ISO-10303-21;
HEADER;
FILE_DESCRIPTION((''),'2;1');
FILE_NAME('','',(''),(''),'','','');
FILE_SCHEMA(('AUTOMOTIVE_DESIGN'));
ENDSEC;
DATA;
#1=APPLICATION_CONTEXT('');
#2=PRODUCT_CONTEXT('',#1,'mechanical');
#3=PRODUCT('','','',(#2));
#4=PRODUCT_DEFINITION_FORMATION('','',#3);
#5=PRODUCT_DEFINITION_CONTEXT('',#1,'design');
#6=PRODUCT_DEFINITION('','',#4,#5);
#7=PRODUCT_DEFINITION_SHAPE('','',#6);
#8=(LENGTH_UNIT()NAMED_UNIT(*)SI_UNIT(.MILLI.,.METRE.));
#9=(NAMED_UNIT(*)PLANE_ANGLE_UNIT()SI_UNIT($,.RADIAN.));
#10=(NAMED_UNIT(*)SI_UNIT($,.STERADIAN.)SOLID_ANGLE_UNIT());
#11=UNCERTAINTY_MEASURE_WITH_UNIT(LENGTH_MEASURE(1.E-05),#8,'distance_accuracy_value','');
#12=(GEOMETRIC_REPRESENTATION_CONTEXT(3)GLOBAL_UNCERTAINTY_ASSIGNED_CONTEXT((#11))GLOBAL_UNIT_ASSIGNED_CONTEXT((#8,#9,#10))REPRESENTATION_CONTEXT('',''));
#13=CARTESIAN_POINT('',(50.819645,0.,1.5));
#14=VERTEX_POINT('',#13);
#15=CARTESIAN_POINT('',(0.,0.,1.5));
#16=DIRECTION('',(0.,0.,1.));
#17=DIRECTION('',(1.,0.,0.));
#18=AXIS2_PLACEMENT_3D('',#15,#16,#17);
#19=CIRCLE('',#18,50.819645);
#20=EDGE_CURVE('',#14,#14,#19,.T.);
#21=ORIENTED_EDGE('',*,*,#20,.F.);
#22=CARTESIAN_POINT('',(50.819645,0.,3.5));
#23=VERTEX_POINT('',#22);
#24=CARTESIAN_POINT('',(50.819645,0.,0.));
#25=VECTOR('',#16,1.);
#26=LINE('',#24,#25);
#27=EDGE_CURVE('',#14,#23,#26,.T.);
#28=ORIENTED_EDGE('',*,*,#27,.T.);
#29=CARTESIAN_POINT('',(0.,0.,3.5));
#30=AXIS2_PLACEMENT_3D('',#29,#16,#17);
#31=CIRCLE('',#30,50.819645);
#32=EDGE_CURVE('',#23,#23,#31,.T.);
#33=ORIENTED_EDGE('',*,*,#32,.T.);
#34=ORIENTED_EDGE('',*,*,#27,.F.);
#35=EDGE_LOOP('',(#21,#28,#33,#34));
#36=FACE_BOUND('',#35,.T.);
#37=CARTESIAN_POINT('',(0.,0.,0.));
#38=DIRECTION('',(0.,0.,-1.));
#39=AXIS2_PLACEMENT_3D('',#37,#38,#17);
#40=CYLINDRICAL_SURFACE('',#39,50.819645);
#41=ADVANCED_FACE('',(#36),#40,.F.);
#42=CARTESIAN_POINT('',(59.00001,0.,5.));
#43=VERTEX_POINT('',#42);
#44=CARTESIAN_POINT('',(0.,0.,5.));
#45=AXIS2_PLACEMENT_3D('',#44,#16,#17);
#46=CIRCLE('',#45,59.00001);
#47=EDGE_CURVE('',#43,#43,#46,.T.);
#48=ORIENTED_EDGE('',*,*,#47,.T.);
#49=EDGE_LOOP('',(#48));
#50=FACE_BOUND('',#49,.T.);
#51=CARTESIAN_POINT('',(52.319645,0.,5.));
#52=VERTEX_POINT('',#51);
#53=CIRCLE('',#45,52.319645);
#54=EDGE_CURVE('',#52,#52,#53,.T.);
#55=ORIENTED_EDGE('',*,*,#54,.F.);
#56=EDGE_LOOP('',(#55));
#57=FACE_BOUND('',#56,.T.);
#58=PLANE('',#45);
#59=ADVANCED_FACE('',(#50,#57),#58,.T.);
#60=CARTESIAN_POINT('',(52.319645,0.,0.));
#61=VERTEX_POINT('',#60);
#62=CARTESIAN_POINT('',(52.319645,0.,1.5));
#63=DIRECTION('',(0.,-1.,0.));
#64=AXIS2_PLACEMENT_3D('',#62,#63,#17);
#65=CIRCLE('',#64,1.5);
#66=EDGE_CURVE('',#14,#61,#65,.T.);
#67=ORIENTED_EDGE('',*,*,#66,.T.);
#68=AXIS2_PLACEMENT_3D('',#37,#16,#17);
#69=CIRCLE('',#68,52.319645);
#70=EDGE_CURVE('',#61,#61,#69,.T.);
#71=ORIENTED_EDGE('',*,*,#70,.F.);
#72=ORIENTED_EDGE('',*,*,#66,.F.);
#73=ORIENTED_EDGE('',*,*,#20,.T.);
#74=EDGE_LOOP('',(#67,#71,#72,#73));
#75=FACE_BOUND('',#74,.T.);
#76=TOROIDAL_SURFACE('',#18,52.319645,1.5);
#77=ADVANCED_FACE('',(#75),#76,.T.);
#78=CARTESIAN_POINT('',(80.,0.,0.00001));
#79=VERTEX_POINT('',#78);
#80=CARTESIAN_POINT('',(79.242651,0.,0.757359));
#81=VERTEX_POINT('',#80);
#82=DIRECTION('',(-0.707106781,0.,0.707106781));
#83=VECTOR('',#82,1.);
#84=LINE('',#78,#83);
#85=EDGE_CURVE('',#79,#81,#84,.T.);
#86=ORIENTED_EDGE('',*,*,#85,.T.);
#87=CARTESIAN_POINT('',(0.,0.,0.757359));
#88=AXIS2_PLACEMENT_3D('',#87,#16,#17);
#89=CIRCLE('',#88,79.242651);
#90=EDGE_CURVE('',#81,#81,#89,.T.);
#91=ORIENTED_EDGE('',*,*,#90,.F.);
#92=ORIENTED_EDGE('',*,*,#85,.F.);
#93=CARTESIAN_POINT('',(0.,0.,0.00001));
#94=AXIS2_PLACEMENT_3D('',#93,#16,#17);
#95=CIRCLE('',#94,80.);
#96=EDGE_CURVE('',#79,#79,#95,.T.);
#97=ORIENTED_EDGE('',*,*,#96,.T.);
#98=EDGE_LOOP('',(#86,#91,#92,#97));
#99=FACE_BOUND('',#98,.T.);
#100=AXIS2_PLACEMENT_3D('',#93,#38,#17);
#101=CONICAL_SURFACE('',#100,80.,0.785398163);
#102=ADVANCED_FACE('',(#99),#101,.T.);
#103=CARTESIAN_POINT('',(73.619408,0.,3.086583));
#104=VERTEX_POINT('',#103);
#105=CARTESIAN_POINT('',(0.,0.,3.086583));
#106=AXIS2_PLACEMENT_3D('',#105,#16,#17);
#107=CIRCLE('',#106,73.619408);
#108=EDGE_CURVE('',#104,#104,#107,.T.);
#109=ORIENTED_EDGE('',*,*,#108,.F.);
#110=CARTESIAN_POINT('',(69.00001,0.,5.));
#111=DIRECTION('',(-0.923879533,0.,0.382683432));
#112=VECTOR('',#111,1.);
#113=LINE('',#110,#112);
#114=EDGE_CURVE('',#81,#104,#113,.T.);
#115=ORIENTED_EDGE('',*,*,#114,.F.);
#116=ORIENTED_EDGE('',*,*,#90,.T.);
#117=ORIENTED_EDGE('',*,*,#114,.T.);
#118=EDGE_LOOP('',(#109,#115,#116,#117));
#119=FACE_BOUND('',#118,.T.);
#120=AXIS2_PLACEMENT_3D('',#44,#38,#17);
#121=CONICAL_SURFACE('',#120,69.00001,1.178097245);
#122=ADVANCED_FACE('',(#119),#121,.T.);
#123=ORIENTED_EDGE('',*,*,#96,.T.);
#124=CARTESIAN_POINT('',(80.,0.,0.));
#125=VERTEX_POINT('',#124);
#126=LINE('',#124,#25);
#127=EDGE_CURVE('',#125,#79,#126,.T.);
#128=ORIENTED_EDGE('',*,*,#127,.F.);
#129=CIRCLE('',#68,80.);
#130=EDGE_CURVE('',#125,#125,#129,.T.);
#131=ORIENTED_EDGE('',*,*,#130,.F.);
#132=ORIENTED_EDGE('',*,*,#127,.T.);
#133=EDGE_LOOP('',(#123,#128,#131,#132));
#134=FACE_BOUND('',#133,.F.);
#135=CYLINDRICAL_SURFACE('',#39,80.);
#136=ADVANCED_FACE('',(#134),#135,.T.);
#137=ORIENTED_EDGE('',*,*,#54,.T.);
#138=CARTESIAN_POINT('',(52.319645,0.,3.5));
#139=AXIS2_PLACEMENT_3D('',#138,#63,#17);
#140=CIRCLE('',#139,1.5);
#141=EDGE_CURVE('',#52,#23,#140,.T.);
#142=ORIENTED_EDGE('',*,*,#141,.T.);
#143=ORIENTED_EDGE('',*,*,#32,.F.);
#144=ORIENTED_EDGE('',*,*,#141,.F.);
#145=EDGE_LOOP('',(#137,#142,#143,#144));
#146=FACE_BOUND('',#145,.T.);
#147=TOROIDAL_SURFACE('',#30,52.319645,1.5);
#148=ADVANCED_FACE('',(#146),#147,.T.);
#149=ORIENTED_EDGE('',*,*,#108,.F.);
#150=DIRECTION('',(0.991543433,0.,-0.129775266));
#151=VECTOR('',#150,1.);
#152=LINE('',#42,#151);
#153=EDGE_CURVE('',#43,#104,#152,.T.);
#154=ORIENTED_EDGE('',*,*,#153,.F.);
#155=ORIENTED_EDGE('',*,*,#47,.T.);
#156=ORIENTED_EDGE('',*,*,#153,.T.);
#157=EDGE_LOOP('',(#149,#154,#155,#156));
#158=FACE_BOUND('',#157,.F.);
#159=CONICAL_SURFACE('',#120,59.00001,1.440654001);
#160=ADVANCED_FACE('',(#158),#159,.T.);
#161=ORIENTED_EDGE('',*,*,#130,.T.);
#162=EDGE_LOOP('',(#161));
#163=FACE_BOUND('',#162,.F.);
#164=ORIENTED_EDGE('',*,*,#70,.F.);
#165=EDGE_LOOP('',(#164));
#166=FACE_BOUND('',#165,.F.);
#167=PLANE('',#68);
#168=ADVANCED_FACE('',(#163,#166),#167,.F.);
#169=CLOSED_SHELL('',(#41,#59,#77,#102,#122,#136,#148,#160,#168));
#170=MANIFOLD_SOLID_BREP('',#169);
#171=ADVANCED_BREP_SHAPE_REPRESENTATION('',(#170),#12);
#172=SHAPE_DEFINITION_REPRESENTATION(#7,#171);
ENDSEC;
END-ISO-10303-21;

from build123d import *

# Parameters (mm, degrees)
F0_R     = 80
F0_R_2   = 50.8196445325
F1_DEPTH = 5
F2_SIZE  = 4.99999
F3_SIZE  = 6
F4_R     = 1.5
F5_R     = 1.5
F6_SIZE2 = 5
F6_SIZE  = 10


# Not quite as in the source:
# - a fillet or chamfer is up to 0.001 mm smaller than in the source, because OpenCascade refuses the exact size


with BuildPart() as f1:
    # F0 (on Top) → F1 (new body)
    with BuildSketch(Plane.XY):
        Circle(F0_R)
        Circle(F0_R_2, mode=Mode.SUBTRACT)
    extrude(amount=F1_DEPTH)

    # F2 (size 5 in the source; OpenCascade refuses exactly that, so slightly less here)
    f2_edges = [f1.edges().sort_by_distance(p)[0] for p in [
        (-80, 0, 5),
    ]]
    chamfer(f2_edges, length=F2_SIZE)

    # F3
    f3_edges = [f1.edges().sort_by_distance(p)[0] for p in [
        (-75.00001, 0, 5),
    ]]
    chamfer(f3_edges, length=F3_SIZE)

    # F4
    f4_edges = [f1.edges().sort_by_distance(p)[0] for p in [
        (-50.819645, 0, 5),
    ]]
    fillet(f4_edges, radius=F4_R)

    # F5
    f5_edges = [f1.edges().sort_by_distance(p)[0] for p in [
        (-50.819645, 0, 0),
    ]]
    fillet(f5_edges, radius=F5_R)

    # F6
    f6_edges = [f1.edges().sort_by_distance(p)[0] for p in [
        (-69.00001, 0, 5),
    ]]
    chamfer(f6_edges, length=F6_SIZE, length2=F6_SIZE2)


solid = f1.part
